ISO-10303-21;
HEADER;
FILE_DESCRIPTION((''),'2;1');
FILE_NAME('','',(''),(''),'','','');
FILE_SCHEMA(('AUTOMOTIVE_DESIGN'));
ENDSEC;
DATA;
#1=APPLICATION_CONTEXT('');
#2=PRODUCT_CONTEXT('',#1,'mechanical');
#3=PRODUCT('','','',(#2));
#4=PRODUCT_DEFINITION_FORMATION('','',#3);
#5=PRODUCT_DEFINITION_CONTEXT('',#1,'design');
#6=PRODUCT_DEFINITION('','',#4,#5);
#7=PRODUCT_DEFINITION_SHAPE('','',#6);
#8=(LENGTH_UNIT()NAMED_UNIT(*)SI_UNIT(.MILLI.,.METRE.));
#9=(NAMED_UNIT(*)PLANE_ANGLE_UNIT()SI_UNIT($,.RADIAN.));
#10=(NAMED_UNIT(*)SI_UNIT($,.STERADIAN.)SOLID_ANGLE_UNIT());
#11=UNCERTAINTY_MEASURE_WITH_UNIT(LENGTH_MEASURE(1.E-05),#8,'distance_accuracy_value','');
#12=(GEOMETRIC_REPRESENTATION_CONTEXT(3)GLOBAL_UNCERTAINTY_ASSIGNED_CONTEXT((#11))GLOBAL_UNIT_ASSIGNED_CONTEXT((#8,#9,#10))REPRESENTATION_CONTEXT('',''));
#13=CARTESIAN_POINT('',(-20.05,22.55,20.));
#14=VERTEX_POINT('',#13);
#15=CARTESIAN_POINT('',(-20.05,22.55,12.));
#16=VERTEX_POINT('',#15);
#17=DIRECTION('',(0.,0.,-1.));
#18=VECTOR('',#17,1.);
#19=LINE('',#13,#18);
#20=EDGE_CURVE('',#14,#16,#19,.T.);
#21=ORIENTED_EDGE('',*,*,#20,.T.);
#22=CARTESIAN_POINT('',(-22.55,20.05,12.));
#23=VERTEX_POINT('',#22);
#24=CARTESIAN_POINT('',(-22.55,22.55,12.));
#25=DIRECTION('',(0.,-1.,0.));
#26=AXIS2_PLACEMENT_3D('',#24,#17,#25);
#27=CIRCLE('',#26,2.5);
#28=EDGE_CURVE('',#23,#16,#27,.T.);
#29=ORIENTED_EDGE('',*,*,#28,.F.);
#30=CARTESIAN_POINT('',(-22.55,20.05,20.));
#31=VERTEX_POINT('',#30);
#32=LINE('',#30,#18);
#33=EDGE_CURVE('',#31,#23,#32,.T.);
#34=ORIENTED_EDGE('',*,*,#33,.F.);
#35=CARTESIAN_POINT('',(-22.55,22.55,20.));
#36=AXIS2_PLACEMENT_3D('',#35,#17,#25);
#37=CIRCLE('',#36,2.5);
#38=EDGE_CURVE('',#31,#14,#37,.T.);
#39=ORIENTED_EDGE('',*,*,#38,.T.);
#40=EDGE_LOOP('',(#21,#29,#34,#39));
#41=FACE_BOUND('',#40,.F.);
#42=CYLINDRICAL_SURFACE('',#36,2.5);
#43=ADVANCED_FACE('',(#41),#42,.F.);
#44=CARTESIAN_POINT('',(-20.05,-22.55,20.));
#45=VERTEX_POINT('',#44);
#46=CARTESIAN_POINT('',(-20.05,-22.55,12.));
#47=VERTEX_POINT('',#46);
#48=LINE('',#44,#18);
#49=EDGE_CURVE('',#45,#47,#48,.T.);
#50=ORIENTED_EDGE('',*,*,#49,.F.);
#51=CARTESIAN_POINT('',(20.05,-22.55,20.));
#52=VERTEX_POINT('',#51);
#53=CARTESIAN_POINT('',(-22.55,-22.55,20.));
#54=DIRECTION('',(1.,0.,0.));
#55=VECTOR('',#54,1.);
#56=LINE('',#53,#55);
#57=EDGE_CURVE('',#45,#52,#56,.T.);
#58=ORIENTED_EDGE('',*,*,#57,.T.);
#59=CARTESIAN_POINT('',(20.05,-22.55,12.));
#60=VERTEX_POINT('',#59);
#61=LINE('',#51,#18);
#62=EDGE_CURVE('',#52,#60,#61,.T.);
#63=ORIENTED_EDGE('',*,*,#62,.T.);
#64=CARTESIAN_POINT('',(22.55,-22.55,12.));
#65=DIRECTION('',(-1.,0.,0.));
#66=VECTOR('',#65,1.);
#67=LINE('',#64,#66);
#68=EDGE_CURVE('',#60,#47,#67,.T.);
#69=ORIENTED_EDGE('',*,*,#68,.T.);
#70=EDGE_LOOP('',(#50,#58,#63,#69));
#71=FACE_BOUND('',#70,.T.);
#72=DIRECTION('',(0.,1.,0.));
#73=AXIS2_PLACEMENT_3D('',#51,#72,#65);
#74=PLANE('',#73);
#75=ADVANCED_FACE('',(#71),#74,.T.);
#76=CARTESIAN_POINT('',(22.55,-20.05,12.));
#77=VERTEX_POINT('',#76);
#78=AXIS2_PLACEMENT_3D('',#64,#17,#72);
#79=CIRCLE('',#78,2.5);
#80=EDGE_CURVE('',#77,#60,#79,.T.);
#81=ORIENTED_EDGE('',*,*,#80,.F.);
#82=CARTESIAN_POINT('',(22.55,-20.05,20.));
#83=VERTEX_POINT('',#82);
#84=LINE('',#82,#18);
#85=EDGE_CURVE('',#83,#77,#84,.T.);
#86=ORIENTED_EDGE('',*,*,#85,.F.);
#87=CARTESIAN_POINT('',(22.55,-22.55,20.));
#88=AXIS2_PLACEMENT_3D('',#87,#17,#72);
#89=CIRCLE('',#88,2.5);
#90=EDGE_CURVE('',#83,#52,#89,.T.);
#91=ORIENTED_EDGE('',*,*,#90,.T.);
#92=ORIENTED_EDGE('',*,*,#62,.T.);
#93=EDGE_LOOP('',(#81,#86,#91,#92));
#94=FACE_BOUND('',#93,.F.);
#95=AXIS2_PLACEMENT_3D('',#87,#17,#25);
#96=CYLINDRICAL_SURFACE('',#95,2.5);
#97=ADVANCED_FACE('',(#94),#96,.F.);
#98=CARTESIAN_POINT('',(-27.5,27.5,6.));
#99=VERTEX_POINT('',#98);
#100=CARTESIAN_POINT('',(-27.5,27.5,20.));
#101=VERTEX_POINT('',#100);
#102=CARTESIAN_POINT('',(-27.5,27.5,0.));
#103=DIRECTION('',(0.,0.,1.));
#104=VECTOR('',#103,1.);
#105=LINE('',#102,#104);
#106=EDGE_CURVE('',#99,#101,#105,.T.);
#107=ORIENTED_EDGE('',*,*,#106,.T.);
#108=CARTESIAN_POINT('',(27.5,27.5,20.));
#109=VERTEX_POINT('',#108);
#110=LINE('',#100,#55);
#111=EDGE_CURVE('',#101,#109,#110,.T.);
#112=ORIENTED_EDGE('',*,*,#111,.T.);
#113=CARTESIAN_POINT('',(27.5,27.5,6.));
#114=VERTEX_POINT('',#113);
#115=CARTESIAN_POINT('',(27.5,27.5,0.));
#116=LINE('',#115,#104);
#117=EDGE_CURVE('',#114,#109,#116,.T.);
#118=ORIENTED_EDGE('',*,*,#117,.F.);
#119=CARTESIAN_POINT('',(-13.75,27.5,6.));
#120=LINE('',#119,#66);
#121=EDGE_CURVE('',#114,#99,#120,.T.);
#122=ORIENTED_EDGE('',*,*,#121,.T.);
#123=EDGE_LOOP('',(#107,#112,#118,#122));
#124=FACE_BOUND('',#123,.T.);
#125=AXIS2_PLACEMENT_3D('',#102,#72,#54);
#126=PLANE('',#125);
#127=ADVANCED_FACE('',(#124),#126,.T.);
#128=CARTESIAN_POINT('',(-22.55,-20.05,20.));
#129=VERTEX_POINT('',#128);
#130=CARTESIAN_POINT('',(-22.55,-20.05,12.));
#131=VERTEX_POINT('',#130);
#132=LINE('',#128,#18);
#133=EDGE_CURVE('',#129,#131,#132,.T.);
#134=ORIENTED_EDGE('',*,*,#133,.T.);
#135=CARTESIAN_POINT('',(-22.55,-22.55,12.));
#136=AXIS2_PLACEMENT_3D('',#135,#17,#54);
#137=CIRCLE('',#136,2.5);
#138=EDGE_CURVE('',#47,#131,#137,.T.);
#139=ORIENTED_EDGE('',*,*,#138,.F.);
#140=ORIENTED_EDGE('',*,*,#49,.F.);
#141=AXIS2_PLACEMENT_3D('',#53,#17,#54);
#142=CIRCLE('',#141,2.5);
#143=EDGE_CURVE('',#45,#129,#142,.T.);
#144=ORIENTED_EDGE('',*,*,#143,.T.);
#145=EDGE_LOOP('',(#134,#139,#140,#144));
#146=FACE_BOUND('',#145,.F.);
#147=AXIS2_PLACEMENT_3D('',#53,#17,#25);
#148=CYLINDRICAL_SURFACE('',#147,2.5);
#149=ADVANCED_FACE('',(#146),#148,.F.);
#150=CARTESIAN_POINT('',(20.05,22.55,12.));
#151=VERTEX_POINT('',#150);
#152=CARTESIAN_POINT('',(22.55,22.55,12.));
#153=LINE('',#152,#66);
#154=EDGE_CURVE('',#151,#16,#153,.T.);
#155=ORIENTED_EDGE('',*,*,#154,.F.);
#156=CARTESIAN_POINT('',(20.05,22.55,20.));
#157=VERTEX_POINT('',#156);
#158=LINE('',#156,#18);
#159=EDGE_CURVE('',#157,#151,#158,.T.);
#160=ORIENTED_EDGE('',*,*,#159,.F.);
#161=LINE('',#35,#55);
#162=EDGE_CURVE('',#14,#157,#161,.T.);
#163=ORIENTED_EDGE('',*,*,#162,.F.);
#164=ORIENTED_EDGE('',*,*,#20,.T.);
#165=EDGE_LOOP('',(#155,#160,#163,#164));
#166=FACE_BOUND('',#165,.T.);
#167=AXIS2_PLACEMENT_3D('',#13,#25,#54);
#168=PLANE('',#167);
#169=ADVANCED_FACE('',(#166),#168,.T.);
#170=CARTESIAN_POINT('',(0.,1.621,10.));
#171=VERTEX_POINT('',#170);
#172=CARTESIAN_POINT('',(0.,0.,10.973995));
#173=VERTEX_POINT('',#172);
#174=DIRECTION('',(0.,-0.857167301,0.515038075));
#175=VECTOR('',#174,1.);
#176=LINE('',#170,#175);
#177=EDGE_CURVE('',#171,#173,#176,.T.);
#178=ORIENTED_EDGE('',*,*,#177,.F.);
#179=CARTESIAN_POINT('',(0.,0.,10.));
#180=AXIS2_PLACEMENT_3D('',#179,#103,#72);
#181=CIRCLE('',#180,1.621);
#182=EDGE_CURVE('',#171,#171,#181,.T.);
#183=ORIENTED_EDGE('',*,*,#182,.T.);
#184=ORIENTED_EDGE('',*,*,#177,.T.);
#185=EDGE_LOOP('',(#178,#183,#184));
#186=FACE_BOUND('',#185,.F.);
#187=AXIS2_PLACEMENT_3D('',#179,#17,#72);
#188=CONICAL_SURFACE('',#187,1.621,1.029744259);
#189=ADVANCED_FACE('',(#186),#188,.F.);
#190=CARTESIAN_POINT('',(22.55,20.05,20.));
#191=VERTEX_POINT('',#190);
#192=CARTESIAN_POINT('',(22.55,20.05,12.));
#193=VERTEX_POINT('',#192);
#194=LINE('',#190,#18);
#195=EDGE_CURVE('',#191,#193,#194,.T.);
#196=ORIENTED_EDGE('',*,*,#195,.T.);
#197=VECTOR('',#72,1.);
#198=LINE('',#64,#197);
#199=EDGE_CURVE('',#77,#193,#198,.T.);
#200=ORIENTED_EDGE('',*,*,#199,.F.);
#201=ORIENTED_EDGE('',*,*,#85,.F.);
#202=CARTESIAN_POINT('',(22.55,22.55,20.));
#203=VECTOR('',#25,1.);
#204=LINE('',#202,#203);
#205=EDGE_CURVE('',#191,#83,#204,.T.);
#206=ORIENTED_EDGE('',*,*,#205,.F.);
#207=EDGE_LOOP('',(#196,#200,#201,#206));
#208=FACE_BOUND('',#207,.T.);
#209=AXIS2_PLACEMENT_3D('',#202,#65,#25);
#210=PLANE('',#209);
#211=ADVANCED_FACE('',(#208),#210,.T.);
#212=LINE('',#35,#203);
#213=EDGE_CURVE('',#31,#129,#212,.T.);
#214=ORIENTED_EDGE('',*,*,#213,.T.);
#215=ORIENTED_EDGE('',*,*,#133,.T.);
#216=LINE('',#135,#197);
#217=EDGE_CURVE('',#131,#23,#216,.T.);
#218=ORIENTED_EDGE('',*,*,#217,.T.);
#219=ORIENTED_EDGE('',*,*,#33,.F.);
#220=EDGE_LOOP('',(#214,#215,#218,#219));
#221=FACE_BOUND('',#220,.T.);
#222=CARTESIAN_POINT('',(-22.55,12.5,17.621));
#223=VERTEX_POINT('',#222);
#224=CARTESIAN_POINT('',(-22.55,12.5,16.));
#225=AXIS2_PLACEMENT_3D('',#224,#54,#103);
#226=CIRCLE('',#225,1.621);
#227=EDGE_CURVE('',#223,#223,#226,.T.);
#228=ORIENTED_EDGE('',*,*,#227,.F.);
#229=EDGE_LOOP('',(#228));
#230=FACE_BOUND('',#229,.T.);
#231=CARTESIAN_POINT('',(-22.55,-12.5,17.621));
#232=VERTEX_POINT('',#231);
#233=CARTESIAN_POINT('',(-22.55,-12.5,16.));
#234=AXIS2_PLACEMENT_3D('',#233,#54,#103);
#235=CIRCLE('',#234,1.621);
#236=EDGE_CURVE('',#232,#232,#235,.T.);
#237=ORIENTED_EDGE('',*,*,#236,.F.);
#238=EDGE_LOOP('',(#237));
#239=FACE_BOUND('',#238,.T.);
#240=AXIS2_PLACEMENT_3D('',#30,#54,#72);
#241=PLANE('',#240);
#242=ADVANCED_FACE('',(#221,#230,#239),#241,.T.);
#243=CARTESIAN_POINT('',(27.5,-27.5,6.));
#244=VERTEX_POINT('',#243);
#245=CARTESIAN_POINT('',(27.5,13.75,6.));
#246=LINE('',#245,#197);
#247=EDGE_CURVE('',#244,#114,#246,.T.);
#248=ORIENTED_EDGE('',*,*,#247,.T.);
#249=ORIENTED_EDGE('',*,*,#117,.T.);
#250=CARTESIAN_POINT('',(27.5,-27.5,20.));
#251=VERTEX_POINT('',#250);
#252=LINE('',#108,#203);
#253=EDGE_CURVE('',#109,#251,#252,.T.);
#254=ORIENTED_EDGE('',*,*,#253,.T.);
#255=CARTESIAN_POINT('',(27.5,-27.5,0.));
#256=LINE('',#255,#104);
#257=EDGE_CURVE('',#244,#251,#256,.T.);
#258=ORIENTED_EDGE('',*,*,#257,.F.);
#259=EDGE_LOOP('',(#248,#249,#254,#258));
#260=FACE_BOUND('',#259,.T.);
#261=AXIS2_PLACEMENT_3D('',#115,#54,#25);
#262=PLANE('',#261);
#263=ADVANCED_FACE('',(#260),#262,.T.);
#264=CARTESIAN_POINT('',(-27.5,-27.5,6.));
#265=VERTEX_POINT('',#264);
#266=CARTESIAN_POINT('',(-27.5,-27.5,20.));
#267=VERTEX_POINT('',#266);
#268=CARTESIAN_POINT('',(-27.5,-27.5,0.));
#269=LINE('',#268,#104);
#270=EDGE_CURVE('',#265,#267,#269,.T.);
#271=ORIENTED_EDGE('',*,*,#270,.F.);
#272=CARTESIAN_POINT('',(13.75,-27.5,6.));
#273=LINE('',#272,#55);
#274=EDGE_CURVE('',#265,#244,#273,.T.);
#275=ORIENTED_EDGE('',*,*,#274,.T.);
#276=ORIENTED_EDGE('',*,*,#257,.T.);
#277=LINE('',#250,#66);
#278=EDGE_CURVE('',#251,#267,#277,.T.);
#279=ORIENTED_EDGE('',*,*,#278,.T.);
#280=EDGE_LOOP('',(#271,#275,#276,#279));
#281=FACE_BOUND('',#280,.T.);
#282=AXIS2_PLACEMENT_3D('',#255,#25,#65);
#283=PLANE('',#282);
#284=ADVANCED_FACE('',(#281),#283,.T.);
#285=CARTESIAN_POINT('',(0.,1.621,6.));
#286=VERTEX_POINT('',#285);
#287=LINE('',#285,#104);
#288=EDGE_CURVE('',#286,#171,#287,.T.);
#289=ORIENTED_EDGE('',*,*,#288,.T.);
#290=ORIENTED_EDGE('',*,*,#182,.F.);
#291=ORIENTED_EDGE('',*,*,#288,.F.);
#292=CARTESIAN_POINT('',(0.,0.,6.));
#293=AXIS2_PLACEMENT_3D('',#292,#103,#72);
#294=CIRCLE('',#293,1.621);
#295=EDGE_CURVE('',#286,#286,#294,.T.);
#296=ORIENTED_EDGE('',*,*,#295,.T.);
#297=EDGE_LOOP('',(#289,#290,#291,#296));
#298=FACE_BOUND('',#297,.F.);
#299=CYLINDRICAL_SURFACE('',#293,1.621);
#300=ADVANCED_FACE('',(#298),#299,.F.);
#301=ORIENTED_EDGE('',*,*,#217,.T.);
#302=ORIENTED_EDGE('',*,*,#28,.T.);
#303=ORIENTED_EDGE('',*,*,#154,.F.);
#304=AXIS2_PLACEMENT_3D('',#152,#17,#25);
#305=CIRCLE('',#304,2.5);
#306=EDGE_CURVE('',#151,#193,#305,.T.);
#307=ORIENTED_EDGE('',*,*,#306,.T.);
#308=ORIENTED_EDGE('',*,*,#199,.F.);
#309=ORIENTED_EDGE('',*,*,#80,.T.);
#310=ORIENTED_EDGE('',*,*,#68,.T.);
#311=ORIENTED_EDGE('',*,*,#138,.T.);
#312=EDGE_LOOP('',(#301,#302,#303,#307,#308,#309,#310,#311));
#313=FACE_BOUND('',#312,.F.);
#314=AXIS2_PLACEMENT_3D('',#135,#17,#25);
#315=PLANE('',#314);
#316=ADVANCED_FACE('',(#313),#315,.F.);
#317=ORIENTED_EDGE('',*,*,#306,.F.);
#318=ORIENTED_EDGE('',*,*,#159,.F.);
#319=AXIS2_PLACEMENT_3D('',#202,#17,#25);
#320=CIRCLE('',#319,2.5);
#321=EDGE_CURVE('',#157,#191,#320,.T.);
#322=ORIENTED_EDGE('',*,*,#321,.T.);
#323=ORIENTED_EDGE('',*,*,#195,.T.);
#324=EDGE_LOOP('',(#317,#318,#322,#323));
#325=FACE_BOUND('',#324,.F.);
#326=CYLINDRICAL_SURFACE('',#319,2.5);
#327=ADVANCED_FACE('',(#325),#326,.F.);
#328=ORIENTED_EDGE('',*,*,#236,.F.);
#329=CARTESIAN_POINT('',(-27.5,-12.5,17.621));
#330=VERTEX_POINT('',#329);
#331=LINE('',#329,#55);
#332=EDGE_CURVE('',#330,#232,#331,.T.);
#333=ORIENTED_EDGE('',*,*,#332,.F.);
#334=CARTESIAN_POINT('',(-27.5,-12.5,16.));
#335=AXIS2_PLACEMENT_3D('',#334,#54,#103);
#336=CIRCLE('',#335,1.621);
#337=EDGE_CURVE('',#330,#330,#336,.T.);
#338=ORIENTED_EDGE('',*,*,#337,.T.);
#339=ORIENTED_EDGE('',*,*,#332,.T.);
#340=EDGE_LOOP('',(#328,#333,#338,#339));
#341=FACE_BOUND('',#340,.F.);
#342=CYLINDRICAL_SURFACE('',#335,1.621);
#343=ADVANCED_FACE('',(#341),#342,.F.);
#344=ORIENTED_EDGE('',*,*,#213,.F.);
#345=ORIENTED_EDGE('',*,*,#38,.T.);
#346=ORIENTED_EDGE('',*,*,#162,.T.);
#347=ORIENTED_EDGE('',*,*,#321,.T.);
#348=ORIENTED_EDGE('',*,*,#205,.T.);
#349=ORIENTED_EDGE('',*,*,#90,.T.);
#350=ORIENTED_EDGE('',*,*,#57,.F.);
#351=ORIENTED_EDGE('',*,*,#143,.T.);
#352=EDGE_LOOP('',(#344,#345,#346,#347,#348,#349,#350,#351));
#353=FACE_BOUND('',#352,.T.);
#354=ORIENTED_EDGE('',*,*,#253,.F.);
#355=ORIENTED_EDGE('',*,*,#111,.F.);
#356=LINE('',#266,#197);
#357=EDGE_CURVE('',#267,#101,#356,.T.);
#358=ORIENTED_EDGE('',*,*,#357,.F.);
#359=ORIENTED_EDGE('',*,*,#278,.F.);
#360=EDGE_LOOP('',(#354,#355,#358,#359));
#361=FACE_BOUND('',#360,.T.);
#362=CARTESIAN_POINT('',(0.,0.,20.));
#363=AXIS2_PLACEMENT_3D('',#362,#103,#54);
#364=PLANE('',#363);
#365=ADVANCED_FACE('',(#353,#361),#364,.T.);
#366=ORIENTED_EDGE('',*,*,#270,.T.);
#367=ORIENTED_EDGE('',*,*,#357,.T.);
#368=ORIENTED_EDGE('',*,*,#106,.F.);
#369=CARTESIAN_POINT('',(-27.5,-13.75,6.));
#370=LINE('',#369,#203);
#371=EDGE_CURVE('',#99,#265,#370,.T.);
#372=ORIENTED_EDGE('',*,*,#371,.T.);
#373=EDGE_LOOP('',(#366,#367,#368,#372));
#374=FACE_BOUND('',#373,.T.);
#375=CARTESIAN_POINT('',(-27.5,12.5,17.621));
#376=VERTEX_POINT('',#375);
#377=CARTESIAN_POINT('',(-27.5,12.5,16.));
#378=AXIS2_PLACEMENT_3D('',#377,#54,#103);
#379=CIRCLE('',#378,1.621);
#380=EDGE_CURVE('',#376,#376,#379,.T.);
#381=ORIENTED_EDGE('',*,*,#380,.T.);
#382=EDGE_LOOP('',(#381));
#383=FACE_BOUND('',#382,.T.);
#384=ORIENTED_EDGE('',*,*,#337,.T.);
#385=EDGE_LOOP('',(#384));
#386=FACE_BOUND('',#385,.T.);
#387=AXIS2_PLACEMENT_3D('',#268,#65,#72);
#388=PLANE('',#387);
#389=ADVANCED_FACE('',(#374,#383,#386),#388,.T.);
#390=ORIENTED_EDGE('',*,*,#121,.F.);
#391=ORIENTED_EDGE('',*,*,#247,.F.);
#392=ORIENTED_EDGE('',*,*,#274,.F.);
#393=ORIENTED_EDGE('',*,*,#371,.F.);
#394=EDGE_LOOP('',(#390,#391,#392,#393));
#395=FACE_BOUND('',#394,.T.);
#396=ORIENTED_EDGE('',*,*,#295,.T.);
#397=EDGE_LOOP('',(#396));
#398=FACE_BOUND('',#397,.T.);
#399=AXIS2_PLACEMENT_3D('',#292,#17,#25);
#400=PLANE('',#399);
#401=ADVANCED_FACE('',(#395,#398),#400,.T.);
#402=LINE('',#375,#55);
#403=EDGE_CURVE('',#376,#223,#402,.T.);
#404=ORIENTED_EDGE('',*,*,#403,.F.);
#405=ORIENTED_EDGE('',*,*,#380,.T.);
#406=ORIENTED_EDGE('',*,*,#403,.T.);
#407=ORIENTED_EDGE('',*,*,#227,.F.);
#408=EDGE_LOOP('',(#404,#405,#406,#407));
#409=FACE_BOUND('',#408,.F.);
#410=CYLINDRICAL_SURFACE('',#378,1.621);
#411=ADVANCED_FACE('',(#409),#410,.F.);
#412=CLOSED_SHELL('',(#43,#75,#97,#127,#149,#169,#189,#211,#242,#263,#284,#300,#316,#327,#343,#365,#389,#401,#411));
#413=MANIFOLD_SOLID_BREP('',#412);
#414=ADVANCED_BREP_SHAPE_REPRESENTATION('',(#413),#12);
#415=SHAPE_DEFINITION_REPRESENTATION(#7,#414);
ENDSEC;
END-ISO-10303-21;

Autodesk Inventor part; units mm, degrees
ref_plane "YZ Plane" through (0, 0, 0) normal (1, 0, 0) x (0, 1, 0)
ref_plane "XZ Plane" through (0, 0, 0) normal (0, 1, 0) x (-1, 0, 0)
ref_plane "XY Plane" through (0, 0, 0) normal (0, 0, 1) x (1, 0, 0)
sketch "Sketch1" plane through (0, 0, 0) normal (0, 0, 1) x (1, 0, 0)
  line L0 (0, 38.5) -> (0, -38.5) construction
  line L1 (-38.5, 0) -> (38.5, 0) construction
  line L2 (-27.5, 27.5) -> (27.5, 27.5)
  line L3 (27.5, 27.5) -> (27.5, -27.5)
  line L4 (27.5, -27.5) -> (-27.5, -27.5)
  line L5 (-27.5, -27.5) -> (-27.5, 27.5)
  point P0 (0, 0)
  dimension "d0" = 55
  dimension "d1" = 55
extrude "Extrusion1" add sketch "Sketch1" along normal blind 20
sketch "Sketch4" plane through (0, 0, 20) normal (0, 0, 1) x (1, 0, 0)
  line L0 (-38.5, 0) -> (38.5, 0) construction
  line L1 (0, 38.5) -> (0, -38.5) construction
  line L2 (-22.55, 22.55) -> (22.55, 22.55) construction
  line L3 (22.55, 22.55) -> (22.55, -22.55) construction
  line L4 (22.55, -22.55) -> (-22.55, -22.55) construction
  line L5 (-22.55, -22.55) -> (-22.55, 22.55) construction
  point P0 (0, 0)
  dimension "d15" = 45.1
  dimension "d16" = 45.1
hole "Hole2" at (-22.55, 22.55, 20) at (22.55, 22.55, 20) at (22.55, -22.55, 20) at (-22.55, -22.55, 20) at (-22.55, 22.55, 20) at (22.55, 22.55, 20) direction (0, 0, -1) diameter 5 depth 8
sketch "Sketch5" plane through (0, 0, 20) normal (0, 0, 1) x (1, 0, 0)
  circle A0 centre (-22.55, 22.55) radius 2.5 projected
  circle A1 centre (22.55, -22.55) radius 2.5 projected
  line L0 (-22.55, 22.55) -> (22.55, 22.55)
  line L1 (22.55, 22.55) -> (22.55, -22.55)
  line L2 (22.55, -22.55) -> (-22.55, -22.55)
  line L3 (-22.55, -22.55) -> (-22.55, 22.55)
  point P0 (0, 0)
extrude "Extrusion3" cut sketch "Sketch5" against normal blind 8 contours L0 L1 A1 L2 L3 A0 | A0 L3 L0 | L1 L2 A1 picked at (-20.9042, 22.3646) picked at (22.003, -20.9868)
sketch "Sketch6" plane through (-27.5, -27.5, 0) normal (-1, 0, 0) x (0, 0, 1)
  line L0 (0, 55) -> (20, 55) projected
  line L1 (0, 0) -> (20, 0) projected
  line L2 (20, 7.45) -> (12, 7.45) construction
  line L3 (20, 47.55) -> (20, 7.45) construction
  line L4 (12, 47.55) -> (20, 47.55) construction
  line L5 (12, 7.45) -> (12, 47.55) construction
  line L6 (16, 47.55) -> (16, 7.45) construction
  point P0 (0, 27.5)
  point P1 (16, 40)
  point P2 (16, 15)
  dimension "d26" = 15
  dimension "d27" = 15
hole "Hole3" at (-27.5, 12.5, 16) at (-27.5, -12.5, 16) direction (1, 0, 0) diameter 3.242 end up to surface thread size "M4x0.7" class "6H" standard "ANSI Metric M Profile"
sketch "Sketch8" plane through (0, 0, 0) normal (0, 0, -1) x (-1, 0, 0)
  line L0 (27.5, 27.5) -> (-27.5, 27.5) construction
  line L1 (-27.5, 27.5) -> (-27.5, -27.5) construction
  line L2 (-27.5, -27.5) -> (27.5, -27.5) construction
  line L3 (27.5, -27.5) -> (27.5, 27.5) construction
  line L4 (0, -38.5) -> (0, 38.5) construction
  line L5 (-38.5, 0) -> (38.5, 0) construction
  line L6 (-12.5, -12.5) -> (12.5, -12.5)
  line L7 (12.5, -12.5) -> (12.5, 12.5)
  line L8 (12.5, 12.5) -> (-12.5, 12.5)
  line L9 (-12.5, 12.5) -> (-12.5, -12.5)
  point P0 (0, 0)
  dimension "d44" = 25
  dimension "d45" = 25
extrude "Extrusion4" cut sketch "Sketch8" against normal blind 6
sketch "Sketch9" plane through (0, 0, 0) normal (0, 0, -1) x (-1, 0, 0)
  line L0 (12.5, 12.5) -> (12.5, -12.5) construction
  line L1 (12.5, -12.5) -> (-12.5, -12.5) construction
  line L2 (-12.5, -12.5) -> (-12.5, 12.5) construction
  line L3 (-12.5, 12.5) -> (12.5, 12.5) construction
  line L4 (27.5, 27.5) -> (-27.5, 27.5) construction
  line L5 (-27.5, 27.5) -> (-27.5, -27.5) construction
  line L6 (-27.5, -27.5) -> (27.5, -27.5) construction
  line L7 (27.5, -27.5) -> (27.5, 27.5) construction
  line L8 (12.5, -12.5) -> (-12.5, -12.5) construction
  point P0 (0, 0)
hole "Hole5" at (-12.5, 12.5, 0) at (-12.5, -12.5, 0) at (12.5, -12.5, 0) at (12.5, 12.5, 0) direction (0, 0, 1) diameter 3 depth 6
sketch "Sketch10" plane through (0, 0, 6) normal (0, 0, -1) x (-1, 0, 0)
  point P0 (0, 0)
  point P1 (0, 0)
hole "Hole6" at (0, 0, 6) direction (0, 0, 1) diameter 3.242 depth 4 tip angle 118 thread size "M4x0.7" class "6H" standard "ANSI Metric M Profile"
ref_plane "SplitPLane" through (0, 0, 6) normal (0, 0, -1) x (-1, 0, 0)
split "Split2" plane through (0, 0, 6) removes the side toward (0, 0, -1)
properties part number "Large-cuvette-mount-40mm-V4" material "PC/ABS Plastic"
